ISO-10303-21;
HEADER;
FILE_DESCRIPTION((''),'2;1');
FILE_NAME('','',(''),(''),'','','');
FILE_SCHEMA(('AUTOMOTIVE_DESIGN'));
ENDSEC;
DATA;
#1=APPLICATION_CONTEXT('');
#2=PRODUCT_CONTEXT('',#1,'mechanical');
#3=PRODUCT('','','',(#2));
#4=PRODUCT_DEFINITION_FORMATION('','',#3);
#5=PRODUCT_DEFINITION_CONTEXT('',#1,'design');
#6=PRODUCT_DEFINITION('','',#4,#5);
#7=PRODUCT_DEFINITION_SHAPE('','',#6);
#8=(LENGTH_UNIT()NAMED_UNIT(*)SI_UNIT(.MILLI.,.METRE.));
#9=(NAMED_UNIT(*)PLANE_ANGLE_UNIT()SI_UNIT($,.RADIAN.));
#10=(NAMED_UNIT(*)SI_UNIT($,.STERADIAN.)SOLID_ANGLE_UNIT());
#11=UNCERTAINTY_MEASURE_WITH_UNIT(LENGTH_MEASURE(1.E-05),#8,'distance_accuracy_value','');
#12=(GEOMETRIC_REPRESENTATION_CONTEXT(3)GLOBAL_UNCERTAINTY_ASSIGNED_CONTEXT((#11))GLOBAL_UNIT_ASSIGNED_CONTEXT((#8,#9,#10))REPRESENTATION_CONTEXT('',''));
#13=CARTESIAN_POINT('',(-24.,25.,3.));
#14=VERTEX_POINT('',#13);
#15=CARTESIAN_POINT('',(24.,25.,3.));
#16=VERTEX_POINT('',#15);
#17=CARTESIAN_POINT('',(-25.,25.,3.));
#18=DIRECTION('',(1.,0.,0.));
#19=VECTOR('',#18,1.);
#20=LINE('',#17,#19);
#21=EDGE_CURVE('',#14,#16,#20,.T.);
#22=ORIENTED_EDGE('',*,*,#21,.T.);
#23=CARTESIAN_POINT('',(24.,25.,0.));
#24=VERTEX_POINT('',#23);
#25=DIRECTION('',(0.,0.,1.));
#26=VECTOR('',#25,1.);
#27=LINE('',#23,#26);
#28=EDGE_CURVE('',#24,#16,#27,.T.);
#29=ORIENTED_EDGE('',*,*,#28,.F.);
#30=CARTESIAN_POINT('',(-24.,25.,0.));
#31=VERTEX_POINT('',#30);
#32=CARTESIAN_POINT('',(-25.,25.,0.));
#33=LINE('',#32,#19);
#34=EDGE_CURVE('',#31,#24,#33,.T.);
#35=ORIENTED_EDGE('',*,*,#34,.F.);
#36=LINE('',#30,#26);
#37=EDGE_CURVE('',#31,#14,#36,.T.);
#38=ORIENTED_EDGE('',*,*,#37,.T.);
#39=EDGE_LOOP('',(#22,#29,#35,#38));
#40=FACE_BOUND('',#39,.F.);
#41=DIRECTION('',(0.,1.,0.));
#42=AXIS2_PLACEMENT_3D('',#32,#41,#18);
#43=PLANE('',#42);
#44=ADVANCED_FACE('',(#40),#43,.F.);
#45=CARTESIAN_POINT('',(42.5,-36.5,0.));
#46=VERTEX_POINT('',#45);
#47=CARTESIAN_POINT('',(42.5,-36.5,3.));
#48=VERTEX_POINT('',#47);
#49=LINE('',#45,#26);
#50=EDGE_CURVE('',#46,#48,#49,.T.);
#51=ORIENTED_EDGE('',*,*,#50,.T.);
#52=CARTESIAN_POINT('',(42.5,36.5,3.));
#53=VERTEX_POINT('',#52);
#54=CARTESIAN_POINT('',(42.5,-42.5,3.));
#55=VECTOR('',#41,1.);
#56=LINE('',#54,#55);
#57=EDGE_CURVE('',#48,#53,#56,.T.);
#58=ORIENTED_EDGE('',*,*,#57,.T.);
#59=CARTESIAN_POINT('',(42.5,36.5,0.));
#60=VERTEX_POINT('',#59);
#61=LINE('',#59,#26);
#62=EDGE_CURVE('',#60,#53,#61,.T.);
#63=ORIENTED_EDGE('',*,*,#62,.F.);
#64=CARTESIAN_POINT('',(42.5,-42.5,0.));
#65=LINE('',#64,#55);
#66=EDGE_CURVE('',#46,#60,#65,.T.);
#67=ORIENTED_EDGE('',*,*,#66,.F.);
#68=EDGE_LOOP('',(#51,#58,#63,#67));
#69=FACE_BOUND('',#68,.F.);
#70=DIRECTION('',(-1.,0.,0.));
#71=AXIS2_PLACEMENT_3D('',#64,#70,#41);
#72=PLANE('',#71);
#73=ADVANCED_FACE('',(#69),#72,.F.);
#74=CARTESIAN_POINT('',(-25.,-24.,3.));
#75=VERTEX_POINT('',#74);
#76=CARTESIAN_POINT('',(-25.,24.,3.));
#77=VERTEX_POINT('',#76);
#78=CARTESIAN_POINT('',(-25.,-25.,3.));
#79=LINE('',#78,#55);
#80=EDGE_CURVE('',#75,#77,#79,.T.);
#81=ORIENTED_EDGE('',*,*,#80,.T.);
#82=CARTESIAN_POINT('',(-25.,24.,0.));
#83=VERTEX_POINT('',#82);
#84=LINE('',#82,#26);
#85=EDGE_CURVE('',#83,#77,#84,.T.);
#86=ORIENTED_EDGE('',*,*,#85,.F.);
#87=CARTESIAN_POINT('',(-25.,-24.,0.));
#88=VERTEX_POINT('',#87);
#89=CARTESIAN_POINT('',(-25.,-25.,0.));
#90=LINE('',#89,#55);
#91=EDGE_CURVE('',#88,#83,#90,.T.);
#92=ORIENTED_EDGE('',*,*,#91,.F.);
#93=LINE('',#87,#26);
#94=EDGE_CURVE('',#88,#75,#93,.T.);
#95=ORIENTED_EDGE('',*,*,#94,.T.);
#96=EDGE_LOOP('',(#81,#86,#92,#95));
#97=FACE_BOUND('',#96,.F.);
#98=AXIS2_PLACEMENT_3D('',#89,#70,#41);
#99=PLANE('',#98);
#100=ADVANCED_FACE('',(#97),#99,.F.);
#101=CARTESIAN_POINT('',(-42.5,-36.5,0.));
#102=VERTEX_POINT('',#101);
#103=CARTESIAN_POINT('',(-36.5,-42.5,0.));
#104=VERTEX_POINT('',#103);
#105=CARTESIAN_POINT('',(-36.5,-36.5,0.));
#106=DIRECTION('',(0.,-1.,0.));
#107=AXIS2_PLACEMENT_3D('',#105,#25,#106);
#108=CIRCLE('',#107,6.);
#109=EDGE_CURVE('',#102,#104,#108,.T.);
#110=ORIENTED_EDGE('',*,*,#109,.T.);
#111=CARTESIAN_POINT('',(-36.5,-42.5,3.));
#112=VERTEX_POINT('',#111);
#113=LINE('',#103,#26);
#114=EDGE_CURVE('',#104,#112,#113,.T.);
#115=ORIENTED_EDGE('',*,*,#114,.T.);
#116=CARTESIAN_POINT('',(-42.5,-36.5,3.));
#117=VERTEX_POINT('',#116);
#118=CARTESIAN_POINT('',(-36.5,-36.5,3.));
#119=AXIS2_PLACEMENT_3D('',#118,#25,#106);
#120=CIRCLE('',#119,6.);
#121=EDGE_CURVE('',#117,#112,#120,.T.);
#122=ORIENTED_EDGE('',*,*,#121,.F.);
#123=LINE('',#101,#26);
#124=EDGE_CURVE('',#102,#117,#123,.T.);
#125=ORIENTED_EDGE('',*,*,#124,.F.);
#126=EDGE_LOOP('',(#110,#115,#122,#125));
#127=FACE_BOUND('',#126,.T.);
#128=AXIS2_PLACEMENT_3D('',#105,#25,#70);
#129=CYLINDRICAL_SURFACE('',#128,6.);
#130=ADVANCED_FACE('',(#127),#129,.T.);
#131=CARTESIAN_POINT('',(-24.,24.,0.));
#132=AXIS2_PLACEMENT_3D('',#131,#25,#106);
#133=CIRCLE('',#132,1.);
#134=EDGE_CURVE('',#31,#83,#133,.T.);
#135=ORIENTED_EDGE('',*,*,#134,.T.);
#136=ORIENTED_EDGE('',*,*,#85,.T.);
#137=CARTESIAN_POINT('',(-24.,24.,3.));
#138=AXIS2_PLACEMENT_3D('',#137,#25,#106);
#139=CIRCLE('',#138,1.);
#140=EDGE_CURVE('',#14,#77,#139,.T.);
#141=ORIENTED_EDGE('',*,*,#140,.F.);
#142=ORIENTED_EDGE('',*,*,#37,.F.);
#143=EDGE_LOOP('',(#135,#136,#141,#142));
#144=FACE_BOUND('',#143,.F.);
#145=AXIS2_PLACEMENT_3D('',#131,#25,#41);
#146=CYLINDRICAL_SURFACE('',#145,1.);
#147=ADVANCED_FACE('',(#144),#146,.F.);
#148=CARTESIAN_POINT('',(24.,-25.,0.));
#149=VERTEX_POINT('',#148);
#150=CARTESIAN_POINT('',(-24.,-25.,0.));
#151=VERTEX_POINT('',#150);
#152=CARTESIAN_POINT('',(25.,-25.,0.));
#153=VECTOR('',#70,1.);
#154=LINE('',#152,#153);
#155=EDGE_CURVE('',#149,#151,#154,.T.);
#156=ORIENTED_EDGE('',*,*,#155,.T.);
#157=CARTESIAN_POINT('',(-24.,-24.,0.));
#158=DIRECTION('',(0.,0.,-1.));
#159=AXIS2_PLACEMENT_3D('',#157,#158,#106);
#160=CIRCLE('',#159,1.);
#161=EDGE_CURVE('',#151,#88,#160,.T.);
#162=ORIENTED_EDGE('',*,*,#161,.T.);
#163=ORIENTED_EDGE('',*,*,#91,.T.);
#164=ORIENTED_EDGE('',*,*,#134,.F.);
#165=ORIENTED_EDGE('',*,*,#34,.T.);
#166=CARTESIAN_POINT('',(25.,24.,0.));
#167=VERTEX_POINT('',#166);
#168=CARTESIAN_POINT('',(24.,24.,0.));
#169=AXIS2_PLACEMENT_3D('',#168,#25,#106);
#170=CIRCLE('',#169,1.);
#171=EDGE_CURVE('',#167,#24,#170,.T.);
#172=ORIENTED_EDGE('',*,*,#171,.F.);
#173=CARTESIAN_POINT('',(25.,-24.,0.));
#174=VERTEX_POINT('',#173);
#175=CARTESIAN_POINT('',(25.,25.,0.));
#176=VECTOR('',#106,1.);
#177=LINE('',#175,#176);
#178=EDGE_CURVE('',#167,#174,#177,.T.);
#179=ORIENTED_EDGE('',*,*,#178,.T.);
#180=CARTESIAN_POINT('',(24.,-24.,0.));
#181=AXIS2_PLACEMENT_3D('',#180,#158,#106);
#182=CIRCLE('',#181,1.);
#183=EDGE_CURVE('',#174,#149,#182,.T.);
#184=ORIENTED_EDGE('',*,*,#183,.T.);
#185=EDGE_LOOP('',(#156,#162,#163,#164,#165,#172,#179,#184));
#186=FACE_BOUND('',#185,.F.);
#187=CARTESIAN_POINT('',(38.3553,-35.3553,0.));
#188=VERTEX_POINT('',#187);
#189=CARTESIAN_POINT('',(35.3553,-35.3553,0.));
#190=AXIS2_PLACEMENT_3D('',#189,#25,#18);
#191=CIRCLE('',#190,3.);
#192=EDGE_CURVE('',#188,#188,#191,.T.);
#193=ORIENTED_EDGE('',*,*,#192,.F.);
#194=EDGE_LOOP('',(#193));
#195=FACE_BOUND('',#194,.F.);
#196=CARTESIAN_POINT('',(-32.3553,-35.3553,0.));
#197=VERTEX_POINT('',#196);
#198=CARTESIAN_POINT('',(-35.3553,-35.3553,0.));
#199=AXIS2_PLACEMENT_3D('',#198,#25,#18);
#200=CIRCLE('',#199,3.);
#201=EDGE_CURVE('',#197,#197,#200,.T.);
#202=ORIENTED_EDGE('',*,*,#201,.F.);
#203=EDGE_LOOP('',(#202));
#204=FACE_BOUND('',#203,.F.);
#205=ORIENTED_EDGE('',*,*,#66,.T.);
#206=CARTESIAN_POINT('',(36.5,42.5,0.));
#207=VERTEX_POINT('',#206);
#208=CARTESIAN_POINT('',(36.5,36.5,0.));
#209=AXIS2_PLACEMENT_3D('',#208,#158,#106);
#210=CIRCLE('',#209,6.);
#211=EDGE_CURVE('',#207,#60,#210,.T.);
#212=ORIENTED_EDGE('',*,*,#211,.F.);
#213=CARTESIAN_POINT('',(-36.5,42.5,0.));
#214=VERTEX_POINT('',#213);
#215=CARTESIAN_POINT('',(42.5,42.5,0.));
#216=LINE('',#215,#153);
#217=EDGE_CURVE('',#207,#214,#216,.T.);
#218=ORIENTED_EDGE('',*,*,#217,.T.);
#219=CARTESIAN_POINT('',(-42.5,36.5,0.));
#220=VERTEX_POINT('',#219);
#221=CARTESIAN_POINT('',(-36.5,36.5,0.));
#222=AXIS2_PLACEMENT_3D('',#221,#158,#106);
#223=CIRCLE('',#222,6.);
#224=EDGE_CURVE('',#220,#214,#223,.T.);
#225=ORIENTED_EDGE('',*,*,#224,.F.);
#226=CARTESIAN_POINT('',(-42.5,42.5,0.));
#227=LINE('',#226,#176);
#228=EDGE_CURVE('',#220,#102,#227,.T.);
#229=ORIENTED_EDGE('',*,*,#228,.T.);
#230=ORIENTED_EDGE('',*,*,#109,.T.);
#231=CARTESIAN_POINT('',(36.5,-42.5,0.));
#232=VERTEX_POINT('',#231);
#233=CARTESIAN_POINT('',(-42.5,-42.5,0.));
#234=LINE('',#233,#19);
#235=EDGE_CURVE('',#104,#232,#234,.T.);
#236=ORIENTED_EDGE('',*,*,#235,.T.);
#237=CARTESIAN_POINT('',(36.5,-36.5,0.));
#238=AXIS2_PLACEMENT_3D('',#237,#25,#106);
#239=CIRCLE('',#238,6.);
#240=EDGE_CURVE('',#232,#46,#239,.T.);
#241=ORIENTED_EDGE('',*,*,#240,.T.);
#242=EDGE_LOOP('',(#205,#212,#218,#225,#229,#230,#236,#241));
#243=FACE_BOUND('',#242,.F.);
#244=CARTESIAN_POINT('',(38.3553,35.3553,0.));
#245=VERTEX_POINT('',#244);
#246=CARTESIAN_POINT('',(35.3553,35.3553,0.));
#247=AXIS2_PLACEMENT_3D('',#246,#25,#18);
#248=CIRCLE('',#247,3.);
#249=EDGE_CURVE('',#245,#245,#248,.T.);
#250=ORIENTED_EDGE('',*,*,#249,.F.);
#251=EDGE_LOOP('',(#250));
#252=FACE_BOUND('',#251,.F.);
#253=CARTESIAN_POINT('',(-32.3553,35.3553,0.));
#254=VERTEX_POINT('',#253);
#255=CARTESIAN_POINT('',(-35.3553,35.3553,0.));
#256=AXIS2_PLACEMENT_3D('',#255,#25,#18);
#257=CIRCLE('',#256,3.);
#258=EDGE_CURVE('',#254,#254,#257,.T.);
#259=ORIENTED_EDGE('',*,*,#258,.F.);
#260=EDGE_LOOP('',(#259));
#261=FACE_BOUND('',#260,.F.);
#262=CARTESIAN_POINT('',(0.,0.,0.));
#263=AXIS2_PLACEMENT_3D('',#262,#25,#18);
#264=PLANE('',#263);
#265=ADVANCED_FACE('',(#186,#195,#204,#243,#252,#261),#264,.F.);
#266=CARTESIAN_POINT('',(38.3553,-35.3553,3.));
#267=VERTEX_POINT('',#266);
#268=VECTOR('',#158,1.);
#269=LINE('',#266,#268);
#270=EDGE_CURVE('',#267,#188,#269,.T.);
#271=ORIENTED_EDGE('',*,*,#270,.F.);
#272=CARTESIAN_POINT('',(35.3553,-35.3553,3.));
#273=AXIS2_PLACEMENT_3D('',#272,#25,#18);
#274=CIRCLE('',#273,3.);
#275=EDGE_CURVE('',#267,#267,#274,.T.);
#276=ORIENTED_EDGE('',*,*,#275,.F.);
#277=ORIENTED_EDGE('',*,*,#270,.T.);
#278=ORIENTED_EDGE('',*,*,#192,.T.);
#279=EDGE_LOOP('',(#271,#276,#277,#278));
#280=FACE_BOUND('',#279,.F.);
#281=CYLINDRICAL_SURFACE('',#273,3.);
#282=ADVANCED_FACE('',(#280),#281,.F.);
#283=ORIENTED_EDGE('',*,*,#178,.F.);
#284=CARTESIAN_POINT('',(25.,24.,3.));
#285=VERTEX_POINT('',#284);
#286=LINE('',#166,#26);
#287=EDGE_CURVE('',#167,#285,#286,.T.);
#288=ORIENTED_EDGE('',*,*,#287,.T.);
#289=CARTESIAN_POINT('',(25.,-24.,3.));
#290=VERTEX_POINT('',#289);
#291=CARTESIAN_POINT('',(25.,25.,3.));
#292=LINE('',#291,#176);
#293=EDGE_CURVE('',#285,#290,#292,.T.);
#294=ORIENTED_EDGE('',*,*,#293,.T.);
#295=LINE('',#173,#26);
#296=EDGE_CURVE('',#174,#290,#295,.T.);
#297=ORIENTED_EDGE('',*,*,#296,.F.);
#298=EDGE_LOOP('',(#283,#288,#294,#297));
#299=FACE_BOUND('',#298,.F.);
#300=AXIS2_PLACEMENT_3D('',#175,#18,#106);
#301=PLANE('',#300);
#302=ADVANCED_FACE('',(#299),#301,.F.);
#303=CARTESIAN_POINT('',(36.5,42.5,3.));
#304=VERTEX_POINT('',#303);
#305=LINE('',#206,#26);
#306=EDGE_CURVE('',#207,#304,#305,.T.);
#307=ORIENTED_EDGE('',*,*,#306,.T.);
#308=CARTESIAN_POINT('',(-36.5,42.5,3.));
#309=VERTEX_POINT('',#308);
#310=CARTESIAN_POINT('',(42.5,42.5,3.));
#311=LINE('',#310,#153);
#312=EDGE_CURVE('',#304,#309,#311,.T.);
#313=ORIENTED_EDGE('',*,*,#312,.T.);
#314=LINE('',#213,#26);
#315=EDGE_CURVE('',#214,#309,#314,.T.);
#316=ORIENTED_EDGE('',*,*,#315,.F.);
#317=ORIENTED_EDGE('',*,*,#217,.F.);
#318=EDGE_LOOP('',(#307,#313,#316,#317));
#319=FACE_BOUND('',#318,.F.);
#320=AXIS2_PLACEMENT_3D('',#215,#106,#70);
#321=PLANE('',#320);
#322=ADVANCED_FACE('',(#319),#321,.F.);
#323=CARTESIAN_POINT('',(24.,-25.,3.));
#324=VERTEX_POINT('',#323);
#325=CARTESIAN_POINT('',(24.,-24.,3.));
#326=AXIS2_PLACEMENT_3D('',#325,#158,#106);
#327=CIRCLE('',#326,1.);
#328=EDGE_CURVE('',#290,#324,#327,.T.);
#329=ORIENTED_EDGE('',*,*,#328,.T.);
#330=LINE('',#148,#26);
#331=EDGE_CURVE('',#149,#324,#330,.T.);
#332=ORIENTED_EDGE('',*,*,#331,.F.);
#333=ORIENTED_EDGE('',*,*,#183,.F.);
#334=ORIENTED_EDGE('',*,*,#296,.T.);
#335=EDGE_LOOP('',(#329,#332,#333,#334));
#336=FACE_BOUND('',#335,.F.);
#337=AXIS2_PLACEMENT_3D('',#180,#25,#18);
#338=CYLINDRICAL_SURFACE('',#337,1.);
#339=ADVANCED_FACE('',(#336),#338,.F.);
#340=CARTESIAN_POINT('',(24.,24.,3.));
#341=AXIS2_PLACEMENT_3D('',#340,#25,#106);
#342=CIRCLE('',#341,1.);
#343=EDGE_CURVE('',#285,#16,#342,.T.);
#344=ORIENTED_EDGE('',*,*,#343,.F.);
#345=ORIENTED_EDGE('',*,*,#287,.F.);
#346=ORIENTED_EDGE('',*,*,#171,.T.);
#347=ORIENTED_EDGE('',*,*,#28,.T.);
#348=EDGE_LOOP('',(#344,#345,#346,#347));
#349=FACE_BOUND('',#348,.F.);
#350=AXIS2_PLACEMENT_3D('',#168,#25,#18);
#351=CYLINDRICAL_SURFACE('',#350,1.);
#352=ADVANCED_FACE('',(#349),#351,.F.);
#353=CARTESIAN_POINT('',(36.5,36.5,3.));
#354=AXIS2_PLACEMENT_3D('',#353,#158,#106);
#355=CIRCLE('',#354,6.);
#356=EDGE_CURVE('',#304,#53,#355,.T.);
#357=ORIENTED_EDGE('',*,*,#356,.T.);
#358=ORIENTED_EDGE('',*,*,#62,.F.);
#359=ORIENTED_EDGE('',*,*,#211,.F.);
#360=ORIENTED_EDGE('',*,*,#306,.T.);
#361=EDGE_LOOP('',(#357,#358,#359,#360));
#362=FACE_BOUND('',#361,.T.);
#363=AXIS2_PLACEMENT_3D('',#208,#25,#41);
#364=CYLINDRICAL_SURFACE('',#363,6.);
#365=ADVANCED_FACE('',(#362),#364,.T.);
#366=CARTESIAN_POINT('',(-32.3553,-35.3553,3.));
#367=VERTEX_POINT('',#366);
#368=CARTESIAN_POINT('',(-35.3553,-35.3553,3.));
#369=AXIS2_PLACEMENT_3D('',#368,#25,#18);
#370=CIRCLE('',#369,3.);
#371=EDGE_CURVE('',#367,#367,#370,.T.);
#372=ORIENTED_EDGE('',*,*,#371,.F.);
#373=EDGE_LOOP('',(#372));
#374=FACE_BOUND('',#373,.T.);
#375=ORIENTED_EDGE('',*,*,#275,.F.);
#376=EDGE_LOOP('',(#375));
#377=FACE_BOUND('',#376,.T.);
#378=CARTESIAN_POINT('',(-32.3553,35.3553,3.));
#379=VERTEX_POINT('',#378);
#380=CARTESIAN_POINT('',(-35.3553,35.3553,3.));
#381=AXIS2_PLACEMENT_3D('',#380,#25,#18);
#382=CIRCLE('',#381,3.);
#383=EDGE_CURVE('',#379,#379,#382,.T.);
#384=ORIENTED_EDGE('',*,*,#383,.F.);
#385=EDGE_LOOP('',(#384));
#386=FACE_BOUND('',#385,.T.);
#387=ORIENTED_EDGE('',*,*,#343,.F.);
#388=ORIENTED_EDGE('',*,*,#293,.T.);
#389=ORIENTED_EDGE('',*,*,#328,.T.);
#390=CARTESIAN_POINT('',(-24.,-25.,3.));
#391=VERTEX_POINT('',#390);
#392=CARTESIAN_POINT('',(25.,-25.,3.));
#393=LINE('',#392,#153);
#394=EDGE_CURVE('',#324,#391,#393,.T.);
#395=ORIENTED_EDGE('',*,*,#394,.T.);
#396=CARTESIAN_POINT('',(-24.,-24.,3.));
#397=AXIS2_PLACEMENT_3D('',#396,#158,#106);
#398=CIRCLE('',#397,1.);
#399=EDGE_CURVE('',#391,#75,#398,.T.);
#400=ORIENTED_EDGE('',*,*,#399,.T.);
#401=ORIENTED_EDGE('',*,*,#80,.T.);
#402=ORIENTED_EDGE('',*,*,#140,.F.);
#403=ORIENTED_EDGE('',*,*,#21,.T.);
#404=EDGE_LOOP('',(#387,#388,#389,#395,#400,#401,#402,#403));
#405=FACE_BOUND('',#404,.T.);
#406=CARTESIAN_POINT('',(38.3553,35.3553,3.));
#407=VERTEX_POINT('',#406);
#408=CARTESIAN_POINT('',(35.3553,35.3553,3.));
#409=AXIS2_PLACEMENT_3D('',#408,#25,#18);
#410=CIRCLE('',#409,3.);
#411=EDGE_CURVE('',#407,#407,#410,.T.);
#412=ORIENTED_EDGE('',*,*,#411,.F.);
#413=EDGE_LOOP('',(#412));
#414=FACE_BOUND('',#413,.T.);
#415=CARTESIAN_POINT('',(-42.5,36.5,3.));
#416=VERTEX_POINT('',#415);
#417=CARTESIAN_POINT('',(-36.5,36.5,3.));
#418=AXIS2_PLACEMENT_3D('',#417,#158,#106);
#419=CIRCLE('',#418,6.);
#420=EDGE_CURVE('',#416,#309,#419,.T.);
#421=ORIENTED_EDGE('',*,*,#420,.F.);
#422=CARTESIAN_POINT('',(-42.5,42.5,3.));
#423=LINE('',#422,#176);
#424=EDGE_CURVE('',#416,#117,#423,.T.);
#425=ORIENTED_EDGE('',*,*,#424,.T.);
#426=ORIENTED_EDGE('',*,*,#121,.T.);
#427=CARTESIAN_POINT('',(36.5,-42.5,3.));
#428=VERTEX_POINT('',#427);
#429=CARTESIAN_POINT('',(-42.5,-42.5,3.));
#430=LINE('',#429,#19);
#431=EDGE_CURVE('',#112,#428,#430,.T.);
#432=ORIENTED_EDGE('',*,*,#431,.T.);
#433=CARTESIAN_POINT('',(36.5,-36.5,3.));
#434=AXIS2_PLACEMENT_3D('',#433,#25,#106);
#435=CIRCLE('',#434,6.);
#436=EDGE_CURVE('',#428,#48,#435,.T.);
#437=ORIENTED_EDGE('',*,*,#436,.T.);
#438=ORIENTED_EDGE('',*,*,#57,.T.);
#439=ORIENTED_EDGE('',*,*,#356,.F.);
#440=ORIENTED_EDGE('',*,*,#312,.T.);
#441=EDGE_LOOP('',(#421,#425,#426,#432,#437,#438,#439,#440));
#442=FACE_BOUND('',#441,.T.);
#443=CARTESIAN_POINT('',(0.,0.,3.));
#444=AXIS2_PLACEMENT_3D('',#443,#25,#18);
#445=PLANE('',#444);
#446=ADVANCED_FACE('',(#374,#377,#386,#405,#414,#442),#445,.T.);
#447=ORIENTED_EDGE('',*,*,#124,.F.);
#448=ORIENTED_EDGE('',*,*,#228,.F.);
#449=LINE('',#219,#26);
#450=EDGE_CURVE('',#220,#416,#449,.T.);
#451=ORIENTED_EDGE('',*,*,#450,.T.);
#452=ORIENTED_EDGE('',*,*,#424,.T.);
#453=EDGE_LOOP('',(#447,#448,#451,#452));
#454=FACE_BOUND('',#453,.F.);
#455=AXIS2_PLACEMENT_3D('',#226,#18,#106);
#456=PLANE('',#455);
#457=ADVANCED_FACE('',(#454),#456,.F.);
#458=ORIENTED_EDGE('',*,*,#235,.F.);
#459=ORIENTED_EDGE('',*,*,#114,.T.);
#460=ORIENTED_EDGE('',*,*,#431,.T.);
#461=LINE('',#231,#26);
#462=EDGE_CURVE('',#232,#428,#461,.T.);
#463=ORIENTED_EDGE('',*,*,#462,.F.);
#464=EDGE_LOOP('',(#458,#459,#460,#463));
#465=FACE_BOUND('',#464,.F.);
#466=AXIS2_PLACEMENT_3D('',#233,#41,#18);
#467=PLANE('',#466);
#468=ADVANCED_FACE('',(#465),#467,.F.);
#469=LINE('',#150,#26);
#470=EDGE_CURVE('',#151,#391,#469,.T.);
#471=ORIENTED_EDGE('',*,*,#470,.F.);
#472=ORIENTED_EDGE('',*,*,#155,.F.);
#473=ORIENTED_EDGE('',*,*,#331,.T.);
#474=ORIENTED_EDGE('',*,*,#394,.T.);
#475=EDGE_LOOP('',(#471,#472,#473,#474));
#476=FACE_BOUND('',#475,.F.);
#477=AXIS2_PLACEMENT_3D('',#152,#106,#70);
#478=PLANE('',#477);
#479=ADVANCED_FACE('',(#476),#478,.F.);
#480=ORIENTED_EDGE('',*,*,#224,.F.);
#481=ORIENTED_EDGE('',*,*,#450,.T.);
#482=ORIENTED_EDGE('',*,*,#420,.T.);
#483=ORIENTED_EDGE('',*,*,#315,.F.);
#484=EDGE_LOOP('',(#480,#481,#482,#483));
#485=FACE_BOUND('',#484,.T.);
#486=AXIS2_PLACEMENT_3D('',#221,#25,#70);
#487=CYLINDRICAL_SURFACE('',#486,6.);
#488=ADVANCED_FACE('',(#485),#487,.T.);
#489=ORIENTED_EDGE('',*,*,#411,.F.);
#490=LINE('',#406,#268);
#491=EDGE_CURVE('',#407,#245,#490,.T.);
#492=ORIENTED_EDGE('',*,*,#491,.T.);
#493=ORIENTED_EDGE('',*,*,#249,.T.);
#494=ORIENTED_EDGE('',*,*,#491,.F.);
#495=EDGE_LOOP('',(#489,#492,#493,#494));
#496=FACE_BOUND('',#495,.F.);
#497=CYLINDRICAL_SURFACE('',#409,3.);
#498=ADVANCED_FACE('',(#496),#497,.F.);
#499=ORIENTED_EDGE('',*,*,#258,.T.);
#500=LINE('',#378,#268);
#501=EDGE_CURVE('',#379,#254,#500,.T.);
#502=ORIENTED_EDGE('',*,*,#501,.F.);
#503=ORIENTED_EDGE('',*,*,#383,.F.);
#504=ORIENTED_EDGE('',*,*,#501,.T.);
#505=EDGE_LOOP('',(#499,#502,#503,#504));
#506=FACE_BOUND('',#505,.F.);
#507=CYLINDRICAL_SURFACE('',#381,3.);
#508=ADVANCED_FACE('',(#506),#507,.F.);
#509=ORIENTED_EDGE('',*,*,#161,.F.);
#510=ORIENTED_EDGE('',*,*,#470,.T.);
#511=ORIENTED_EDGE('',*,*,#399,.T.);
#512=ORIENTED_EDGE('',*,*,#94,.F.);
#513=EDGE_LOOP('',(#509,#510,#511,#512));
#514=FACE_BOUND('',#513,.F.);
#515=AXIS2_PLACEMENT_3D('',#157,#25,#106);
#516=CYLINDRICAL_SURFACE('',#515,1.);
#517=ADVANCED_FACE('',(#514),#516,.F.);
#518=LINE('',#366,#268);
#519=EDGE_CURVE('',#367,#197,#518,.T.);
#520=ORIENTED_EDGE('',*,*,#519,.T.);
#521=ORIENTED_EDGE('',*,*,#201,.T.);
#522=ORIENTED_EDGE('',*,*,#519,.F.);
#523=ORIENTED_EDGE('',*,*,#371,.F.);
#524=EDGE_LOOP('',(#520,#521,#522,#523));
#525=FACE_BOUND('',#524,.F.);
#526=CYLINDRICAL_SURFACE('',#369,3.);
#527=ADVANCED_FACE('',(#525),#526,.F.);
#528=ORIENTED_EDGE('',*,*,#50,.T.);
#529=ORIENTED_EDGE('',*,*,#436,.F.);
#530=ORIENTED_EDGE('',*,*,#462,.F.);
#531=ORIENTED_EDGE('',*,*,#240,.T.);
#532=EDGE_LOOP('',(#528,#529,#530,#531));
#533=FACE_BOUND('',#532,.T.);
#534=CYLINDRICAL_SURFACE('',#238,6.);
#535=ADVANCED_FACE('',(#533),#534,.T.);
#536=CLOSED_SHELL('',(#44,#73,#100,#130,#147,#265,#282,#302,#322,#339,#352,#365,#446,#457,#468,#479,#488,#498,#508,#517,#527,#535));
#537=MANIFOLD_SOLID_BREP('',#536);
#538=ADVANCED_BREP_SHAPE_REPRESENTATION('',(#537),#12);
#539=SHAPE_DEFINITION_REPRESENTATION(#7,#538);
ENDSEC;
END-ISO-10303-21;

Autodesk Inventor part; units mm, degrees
ref_plane "YZ Plane" through (0, 0, 0) normal (1, 0, 0) x (0, 1, 0)
ref_plane "XZ Plane" through (0, 0, 0) normal (0, 1, 0) x (-1, 0, 0)
ref_plane "XY Plane" through (0, 0, 0) normal (0, 0, 1) x (1, 0, 0)
sketch "Sketch1" plane through (0, 0, 0) normal (0, 0, 1) x (1, 0, 0)
  line L0 (-42.5, -42.5) -> (42.5, -42.5)
  line L1 (42.5, -42.5) -> (42.5, 42.5)
  line L2 (42.5, 42.5) -> (-42.5, 42.5)
  line L3 (-42.5, 42.5) -> (-42.5, -42.5)
  line L4 (-42.5, -42.5) -> (42.5, 42.5) construction
  line L5 (42.5, -42.5) -> (-42.5, 42.5) construction
  line L6 (25, -25) -> (-25, -25)
  line L7 (-25, -25) -> (-25, 25)
  line L8 (-25, 25) -> (25, 25)
  line L9 (25, 25) -> (25, -25)
  line L10 (25, -25) -> (-25, 25) construction
  line L11 (-25, -25) -> (25, 25) construction
  point P0 (0, 0)
  dimension "d154" = 85
  dimension "d155" = 85
  dimension "d172" = 50
extrude "Plate5" add sketch "Sketch1" along normal blind 3
sketch "Sketch9" plane through (0, 0, 3) normal (0, 0, 1) x (1, 0, 0)
  circle A0 centre (35.3553, -35.3553) radius 3
  line L0 (35.3553, 35.3553) -> (-35.3553, 35.3553) construction
  line L1 (-35.3553, 35.3553) -> (-35.3553, -35.3553) construction
  line L2 (-35.3553, -35.3553) -> (35.3553, -35.3553) construction
  line L3 (35.3553, -35.3553) -> (35.3553, 35.3553) construction
  line L4 (35.3553, 35.3553) -> (-35.3553, -35.3553) construction
  line L5 (-35.3553, 35.3553) -> (35.3553, -35.3553) construction
  circle A1 centre (-35.3553, -35.3553) radius 3
  circle A2 centre (35.3553, 35.3553) radius 3
  circle A3 centre (-35.3553, 35.3553) radius 3
  circle A4 centre (0, 0) radius 50 construction
  dimension "d180" = 100
  dimension "d174" = 6
extrude "Cut2" cut sketch "Sketch9" against normal blind 3
fillet "Corner Round1" radius 6 4 edges at (42.5, 42.5, 1.5) (-42.5, 42.5, 1.5) (-42.5, -42.5, 1.5) (42.5, -42.5, 1.5)
fillet "Corner Round2" radius 1 4 edges at (-25, 25, 1.5) (-25, -25, 1.5) (25, -25, 1.5) (25, 25, 1.5)
properties part number "TKS 3525 FDS Way FLANGE" material "Stainless Steel"
